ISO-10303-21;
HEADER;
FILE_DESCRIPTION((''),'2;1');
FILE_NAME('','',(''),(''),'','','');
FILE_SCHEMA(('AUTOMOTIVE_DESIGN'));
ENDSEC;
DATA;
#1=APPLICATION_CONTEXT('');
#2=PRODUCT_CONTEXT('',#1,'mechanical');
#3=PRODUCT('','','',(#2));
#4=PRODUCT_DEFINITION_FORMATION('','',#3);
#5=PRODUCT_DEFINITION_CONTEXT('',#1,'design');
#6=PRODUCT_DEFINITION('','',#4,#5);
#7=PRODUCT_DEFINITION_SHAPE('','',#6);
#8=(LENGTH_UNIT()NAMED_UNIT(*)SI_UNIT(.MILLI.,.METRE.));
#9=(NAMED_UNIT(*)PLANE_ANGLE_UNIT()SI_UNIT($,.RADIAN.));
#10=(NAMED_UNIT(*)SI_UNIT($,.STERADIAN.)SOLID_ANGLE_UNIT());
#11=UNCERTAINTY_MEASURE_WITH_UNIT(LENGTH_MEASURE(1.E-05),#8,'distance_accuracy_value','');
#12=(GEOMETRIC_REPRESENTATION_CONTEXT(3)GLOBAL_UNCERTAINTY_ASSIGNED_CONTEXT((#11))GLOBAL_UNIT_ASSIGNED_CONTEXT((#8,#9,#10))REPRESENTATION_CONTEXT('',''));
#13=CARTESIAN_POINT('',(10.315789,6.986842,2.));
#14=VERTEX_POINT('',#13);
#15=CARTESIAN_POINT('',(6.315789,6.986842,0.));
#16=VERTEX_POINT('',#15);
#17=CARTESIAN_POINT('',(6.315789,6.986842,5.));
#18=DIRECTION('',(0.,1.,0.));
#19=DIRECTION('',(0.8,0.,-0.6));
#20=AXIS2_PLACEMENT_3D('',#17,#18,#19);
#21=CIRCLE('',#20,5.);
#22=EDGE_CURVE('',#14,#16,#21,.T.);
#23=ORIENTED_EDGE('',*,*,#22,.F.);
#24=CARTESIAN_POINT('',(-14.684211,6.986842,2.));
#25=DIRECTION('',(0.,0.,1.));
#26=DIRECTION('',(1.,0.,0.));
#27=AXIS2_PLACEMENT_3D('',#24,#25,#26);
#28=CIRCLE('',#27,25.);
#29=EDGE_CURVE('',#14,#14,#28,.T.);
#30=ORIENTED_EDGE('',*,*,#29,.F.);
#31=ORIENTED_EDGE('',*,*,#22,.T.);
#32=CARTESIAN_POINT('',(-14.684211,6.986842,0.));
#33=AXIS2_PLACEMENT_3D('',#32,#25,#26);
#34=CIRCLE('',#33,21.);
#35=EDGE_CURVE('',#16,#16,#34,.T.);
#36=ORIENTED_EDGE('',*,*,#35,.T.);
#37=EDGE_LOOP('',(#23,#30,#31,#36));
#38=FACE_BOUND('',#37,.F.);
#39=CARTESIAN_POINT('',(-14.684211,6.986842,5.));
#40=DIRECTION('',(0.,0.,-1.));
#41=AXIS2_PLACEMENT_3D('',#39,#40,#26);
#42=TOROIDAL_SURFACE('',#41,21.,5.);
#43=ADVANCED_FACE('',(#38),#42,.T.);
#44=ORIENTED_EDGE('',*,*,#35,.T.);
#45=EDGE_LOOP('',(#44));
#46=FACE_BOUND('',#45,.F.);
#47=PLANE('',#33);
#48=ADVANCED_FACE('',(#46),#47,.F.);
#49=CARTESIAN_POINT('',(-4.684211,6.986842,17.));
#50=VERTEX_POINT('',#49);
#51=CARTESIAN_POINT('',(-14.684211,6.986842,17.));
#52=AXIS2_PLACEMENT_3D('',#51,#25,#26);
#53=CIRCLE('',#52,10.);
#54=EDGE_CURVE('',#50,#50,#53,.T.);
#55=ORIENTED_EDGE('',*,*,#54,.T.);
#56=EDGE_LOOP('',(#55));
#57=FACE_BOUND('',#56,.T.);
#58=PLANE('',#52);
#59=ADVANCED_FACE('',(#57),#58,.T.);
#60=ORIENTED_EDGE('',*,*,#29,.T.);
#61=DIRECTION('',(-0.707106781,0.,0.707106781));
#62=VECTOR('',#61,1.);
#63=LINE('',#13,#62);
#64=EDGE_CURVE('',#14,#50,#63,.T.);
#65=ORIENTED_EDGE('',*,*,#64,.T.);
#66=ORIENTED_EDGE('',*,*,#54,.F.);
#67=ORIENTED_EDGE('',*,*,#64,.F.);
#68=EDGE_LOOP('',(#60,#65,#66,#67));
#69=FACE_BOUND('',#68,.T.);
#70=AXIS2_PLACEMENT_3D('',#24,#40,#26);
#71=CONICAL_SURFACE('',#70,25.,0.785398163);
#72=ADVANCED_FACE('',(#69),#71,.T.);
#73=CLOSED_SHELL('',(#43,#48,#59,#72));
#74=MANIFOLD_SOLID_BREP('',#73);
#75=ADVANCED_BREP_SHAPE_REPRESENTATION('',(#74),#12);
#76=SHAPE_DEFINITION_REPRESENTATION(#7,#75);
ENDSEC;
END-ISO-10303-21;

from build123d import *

# Parameters (mm, degrees)
F0_R     = 25
F1_DEPTH = 17
F2_SIZE  = 15


# Not quite as in the source:
# - a fillet or chamfer that OpenCascade refuses, or shapes differently, is made with other operations: its cross-section is extruded or revolved along the edge and cut away or added


with BuildPart() as f1:
    # F0 (on Top) → F1 (new body)
    with BuildSketch(Plane.XY):
        with Locations((-14.6842114627, 6.9868424907)):
            Circle(F0_R)
    extrude(amount=F1_DEPTH)

    # F2
    f2_edges = [f1.edges().sort_by_distance(p)[0] for p in [
        (-39.684211, 6.986842, 17),
    ]]
    chamfer(f2_edges, length=F2_SIZE)

    # F3: fillet of radius 5 on 1 edges, made by hand

    # F3_s1 → F3_t2 (revolve, cut)
    with BuildSketch(Plane.XZ.offset(-6.9868424907)):
        with BuildLine():
            ThreePointArc((10.3157885373, 2), (8.5518565148, 0.527864045), (6.3157885373, 0))
            Line((6.3157885373, 0), (10.3157885373, 0))
            Line((10.3157885373, 0), (10.3157885373, 2))
        make_face()
    revolve(axis=Axis((-14.6842114627, 6.9868424907, 0), (0, 0, 1)), mode=Mode.SUBTRACT)


solid = f1.part
